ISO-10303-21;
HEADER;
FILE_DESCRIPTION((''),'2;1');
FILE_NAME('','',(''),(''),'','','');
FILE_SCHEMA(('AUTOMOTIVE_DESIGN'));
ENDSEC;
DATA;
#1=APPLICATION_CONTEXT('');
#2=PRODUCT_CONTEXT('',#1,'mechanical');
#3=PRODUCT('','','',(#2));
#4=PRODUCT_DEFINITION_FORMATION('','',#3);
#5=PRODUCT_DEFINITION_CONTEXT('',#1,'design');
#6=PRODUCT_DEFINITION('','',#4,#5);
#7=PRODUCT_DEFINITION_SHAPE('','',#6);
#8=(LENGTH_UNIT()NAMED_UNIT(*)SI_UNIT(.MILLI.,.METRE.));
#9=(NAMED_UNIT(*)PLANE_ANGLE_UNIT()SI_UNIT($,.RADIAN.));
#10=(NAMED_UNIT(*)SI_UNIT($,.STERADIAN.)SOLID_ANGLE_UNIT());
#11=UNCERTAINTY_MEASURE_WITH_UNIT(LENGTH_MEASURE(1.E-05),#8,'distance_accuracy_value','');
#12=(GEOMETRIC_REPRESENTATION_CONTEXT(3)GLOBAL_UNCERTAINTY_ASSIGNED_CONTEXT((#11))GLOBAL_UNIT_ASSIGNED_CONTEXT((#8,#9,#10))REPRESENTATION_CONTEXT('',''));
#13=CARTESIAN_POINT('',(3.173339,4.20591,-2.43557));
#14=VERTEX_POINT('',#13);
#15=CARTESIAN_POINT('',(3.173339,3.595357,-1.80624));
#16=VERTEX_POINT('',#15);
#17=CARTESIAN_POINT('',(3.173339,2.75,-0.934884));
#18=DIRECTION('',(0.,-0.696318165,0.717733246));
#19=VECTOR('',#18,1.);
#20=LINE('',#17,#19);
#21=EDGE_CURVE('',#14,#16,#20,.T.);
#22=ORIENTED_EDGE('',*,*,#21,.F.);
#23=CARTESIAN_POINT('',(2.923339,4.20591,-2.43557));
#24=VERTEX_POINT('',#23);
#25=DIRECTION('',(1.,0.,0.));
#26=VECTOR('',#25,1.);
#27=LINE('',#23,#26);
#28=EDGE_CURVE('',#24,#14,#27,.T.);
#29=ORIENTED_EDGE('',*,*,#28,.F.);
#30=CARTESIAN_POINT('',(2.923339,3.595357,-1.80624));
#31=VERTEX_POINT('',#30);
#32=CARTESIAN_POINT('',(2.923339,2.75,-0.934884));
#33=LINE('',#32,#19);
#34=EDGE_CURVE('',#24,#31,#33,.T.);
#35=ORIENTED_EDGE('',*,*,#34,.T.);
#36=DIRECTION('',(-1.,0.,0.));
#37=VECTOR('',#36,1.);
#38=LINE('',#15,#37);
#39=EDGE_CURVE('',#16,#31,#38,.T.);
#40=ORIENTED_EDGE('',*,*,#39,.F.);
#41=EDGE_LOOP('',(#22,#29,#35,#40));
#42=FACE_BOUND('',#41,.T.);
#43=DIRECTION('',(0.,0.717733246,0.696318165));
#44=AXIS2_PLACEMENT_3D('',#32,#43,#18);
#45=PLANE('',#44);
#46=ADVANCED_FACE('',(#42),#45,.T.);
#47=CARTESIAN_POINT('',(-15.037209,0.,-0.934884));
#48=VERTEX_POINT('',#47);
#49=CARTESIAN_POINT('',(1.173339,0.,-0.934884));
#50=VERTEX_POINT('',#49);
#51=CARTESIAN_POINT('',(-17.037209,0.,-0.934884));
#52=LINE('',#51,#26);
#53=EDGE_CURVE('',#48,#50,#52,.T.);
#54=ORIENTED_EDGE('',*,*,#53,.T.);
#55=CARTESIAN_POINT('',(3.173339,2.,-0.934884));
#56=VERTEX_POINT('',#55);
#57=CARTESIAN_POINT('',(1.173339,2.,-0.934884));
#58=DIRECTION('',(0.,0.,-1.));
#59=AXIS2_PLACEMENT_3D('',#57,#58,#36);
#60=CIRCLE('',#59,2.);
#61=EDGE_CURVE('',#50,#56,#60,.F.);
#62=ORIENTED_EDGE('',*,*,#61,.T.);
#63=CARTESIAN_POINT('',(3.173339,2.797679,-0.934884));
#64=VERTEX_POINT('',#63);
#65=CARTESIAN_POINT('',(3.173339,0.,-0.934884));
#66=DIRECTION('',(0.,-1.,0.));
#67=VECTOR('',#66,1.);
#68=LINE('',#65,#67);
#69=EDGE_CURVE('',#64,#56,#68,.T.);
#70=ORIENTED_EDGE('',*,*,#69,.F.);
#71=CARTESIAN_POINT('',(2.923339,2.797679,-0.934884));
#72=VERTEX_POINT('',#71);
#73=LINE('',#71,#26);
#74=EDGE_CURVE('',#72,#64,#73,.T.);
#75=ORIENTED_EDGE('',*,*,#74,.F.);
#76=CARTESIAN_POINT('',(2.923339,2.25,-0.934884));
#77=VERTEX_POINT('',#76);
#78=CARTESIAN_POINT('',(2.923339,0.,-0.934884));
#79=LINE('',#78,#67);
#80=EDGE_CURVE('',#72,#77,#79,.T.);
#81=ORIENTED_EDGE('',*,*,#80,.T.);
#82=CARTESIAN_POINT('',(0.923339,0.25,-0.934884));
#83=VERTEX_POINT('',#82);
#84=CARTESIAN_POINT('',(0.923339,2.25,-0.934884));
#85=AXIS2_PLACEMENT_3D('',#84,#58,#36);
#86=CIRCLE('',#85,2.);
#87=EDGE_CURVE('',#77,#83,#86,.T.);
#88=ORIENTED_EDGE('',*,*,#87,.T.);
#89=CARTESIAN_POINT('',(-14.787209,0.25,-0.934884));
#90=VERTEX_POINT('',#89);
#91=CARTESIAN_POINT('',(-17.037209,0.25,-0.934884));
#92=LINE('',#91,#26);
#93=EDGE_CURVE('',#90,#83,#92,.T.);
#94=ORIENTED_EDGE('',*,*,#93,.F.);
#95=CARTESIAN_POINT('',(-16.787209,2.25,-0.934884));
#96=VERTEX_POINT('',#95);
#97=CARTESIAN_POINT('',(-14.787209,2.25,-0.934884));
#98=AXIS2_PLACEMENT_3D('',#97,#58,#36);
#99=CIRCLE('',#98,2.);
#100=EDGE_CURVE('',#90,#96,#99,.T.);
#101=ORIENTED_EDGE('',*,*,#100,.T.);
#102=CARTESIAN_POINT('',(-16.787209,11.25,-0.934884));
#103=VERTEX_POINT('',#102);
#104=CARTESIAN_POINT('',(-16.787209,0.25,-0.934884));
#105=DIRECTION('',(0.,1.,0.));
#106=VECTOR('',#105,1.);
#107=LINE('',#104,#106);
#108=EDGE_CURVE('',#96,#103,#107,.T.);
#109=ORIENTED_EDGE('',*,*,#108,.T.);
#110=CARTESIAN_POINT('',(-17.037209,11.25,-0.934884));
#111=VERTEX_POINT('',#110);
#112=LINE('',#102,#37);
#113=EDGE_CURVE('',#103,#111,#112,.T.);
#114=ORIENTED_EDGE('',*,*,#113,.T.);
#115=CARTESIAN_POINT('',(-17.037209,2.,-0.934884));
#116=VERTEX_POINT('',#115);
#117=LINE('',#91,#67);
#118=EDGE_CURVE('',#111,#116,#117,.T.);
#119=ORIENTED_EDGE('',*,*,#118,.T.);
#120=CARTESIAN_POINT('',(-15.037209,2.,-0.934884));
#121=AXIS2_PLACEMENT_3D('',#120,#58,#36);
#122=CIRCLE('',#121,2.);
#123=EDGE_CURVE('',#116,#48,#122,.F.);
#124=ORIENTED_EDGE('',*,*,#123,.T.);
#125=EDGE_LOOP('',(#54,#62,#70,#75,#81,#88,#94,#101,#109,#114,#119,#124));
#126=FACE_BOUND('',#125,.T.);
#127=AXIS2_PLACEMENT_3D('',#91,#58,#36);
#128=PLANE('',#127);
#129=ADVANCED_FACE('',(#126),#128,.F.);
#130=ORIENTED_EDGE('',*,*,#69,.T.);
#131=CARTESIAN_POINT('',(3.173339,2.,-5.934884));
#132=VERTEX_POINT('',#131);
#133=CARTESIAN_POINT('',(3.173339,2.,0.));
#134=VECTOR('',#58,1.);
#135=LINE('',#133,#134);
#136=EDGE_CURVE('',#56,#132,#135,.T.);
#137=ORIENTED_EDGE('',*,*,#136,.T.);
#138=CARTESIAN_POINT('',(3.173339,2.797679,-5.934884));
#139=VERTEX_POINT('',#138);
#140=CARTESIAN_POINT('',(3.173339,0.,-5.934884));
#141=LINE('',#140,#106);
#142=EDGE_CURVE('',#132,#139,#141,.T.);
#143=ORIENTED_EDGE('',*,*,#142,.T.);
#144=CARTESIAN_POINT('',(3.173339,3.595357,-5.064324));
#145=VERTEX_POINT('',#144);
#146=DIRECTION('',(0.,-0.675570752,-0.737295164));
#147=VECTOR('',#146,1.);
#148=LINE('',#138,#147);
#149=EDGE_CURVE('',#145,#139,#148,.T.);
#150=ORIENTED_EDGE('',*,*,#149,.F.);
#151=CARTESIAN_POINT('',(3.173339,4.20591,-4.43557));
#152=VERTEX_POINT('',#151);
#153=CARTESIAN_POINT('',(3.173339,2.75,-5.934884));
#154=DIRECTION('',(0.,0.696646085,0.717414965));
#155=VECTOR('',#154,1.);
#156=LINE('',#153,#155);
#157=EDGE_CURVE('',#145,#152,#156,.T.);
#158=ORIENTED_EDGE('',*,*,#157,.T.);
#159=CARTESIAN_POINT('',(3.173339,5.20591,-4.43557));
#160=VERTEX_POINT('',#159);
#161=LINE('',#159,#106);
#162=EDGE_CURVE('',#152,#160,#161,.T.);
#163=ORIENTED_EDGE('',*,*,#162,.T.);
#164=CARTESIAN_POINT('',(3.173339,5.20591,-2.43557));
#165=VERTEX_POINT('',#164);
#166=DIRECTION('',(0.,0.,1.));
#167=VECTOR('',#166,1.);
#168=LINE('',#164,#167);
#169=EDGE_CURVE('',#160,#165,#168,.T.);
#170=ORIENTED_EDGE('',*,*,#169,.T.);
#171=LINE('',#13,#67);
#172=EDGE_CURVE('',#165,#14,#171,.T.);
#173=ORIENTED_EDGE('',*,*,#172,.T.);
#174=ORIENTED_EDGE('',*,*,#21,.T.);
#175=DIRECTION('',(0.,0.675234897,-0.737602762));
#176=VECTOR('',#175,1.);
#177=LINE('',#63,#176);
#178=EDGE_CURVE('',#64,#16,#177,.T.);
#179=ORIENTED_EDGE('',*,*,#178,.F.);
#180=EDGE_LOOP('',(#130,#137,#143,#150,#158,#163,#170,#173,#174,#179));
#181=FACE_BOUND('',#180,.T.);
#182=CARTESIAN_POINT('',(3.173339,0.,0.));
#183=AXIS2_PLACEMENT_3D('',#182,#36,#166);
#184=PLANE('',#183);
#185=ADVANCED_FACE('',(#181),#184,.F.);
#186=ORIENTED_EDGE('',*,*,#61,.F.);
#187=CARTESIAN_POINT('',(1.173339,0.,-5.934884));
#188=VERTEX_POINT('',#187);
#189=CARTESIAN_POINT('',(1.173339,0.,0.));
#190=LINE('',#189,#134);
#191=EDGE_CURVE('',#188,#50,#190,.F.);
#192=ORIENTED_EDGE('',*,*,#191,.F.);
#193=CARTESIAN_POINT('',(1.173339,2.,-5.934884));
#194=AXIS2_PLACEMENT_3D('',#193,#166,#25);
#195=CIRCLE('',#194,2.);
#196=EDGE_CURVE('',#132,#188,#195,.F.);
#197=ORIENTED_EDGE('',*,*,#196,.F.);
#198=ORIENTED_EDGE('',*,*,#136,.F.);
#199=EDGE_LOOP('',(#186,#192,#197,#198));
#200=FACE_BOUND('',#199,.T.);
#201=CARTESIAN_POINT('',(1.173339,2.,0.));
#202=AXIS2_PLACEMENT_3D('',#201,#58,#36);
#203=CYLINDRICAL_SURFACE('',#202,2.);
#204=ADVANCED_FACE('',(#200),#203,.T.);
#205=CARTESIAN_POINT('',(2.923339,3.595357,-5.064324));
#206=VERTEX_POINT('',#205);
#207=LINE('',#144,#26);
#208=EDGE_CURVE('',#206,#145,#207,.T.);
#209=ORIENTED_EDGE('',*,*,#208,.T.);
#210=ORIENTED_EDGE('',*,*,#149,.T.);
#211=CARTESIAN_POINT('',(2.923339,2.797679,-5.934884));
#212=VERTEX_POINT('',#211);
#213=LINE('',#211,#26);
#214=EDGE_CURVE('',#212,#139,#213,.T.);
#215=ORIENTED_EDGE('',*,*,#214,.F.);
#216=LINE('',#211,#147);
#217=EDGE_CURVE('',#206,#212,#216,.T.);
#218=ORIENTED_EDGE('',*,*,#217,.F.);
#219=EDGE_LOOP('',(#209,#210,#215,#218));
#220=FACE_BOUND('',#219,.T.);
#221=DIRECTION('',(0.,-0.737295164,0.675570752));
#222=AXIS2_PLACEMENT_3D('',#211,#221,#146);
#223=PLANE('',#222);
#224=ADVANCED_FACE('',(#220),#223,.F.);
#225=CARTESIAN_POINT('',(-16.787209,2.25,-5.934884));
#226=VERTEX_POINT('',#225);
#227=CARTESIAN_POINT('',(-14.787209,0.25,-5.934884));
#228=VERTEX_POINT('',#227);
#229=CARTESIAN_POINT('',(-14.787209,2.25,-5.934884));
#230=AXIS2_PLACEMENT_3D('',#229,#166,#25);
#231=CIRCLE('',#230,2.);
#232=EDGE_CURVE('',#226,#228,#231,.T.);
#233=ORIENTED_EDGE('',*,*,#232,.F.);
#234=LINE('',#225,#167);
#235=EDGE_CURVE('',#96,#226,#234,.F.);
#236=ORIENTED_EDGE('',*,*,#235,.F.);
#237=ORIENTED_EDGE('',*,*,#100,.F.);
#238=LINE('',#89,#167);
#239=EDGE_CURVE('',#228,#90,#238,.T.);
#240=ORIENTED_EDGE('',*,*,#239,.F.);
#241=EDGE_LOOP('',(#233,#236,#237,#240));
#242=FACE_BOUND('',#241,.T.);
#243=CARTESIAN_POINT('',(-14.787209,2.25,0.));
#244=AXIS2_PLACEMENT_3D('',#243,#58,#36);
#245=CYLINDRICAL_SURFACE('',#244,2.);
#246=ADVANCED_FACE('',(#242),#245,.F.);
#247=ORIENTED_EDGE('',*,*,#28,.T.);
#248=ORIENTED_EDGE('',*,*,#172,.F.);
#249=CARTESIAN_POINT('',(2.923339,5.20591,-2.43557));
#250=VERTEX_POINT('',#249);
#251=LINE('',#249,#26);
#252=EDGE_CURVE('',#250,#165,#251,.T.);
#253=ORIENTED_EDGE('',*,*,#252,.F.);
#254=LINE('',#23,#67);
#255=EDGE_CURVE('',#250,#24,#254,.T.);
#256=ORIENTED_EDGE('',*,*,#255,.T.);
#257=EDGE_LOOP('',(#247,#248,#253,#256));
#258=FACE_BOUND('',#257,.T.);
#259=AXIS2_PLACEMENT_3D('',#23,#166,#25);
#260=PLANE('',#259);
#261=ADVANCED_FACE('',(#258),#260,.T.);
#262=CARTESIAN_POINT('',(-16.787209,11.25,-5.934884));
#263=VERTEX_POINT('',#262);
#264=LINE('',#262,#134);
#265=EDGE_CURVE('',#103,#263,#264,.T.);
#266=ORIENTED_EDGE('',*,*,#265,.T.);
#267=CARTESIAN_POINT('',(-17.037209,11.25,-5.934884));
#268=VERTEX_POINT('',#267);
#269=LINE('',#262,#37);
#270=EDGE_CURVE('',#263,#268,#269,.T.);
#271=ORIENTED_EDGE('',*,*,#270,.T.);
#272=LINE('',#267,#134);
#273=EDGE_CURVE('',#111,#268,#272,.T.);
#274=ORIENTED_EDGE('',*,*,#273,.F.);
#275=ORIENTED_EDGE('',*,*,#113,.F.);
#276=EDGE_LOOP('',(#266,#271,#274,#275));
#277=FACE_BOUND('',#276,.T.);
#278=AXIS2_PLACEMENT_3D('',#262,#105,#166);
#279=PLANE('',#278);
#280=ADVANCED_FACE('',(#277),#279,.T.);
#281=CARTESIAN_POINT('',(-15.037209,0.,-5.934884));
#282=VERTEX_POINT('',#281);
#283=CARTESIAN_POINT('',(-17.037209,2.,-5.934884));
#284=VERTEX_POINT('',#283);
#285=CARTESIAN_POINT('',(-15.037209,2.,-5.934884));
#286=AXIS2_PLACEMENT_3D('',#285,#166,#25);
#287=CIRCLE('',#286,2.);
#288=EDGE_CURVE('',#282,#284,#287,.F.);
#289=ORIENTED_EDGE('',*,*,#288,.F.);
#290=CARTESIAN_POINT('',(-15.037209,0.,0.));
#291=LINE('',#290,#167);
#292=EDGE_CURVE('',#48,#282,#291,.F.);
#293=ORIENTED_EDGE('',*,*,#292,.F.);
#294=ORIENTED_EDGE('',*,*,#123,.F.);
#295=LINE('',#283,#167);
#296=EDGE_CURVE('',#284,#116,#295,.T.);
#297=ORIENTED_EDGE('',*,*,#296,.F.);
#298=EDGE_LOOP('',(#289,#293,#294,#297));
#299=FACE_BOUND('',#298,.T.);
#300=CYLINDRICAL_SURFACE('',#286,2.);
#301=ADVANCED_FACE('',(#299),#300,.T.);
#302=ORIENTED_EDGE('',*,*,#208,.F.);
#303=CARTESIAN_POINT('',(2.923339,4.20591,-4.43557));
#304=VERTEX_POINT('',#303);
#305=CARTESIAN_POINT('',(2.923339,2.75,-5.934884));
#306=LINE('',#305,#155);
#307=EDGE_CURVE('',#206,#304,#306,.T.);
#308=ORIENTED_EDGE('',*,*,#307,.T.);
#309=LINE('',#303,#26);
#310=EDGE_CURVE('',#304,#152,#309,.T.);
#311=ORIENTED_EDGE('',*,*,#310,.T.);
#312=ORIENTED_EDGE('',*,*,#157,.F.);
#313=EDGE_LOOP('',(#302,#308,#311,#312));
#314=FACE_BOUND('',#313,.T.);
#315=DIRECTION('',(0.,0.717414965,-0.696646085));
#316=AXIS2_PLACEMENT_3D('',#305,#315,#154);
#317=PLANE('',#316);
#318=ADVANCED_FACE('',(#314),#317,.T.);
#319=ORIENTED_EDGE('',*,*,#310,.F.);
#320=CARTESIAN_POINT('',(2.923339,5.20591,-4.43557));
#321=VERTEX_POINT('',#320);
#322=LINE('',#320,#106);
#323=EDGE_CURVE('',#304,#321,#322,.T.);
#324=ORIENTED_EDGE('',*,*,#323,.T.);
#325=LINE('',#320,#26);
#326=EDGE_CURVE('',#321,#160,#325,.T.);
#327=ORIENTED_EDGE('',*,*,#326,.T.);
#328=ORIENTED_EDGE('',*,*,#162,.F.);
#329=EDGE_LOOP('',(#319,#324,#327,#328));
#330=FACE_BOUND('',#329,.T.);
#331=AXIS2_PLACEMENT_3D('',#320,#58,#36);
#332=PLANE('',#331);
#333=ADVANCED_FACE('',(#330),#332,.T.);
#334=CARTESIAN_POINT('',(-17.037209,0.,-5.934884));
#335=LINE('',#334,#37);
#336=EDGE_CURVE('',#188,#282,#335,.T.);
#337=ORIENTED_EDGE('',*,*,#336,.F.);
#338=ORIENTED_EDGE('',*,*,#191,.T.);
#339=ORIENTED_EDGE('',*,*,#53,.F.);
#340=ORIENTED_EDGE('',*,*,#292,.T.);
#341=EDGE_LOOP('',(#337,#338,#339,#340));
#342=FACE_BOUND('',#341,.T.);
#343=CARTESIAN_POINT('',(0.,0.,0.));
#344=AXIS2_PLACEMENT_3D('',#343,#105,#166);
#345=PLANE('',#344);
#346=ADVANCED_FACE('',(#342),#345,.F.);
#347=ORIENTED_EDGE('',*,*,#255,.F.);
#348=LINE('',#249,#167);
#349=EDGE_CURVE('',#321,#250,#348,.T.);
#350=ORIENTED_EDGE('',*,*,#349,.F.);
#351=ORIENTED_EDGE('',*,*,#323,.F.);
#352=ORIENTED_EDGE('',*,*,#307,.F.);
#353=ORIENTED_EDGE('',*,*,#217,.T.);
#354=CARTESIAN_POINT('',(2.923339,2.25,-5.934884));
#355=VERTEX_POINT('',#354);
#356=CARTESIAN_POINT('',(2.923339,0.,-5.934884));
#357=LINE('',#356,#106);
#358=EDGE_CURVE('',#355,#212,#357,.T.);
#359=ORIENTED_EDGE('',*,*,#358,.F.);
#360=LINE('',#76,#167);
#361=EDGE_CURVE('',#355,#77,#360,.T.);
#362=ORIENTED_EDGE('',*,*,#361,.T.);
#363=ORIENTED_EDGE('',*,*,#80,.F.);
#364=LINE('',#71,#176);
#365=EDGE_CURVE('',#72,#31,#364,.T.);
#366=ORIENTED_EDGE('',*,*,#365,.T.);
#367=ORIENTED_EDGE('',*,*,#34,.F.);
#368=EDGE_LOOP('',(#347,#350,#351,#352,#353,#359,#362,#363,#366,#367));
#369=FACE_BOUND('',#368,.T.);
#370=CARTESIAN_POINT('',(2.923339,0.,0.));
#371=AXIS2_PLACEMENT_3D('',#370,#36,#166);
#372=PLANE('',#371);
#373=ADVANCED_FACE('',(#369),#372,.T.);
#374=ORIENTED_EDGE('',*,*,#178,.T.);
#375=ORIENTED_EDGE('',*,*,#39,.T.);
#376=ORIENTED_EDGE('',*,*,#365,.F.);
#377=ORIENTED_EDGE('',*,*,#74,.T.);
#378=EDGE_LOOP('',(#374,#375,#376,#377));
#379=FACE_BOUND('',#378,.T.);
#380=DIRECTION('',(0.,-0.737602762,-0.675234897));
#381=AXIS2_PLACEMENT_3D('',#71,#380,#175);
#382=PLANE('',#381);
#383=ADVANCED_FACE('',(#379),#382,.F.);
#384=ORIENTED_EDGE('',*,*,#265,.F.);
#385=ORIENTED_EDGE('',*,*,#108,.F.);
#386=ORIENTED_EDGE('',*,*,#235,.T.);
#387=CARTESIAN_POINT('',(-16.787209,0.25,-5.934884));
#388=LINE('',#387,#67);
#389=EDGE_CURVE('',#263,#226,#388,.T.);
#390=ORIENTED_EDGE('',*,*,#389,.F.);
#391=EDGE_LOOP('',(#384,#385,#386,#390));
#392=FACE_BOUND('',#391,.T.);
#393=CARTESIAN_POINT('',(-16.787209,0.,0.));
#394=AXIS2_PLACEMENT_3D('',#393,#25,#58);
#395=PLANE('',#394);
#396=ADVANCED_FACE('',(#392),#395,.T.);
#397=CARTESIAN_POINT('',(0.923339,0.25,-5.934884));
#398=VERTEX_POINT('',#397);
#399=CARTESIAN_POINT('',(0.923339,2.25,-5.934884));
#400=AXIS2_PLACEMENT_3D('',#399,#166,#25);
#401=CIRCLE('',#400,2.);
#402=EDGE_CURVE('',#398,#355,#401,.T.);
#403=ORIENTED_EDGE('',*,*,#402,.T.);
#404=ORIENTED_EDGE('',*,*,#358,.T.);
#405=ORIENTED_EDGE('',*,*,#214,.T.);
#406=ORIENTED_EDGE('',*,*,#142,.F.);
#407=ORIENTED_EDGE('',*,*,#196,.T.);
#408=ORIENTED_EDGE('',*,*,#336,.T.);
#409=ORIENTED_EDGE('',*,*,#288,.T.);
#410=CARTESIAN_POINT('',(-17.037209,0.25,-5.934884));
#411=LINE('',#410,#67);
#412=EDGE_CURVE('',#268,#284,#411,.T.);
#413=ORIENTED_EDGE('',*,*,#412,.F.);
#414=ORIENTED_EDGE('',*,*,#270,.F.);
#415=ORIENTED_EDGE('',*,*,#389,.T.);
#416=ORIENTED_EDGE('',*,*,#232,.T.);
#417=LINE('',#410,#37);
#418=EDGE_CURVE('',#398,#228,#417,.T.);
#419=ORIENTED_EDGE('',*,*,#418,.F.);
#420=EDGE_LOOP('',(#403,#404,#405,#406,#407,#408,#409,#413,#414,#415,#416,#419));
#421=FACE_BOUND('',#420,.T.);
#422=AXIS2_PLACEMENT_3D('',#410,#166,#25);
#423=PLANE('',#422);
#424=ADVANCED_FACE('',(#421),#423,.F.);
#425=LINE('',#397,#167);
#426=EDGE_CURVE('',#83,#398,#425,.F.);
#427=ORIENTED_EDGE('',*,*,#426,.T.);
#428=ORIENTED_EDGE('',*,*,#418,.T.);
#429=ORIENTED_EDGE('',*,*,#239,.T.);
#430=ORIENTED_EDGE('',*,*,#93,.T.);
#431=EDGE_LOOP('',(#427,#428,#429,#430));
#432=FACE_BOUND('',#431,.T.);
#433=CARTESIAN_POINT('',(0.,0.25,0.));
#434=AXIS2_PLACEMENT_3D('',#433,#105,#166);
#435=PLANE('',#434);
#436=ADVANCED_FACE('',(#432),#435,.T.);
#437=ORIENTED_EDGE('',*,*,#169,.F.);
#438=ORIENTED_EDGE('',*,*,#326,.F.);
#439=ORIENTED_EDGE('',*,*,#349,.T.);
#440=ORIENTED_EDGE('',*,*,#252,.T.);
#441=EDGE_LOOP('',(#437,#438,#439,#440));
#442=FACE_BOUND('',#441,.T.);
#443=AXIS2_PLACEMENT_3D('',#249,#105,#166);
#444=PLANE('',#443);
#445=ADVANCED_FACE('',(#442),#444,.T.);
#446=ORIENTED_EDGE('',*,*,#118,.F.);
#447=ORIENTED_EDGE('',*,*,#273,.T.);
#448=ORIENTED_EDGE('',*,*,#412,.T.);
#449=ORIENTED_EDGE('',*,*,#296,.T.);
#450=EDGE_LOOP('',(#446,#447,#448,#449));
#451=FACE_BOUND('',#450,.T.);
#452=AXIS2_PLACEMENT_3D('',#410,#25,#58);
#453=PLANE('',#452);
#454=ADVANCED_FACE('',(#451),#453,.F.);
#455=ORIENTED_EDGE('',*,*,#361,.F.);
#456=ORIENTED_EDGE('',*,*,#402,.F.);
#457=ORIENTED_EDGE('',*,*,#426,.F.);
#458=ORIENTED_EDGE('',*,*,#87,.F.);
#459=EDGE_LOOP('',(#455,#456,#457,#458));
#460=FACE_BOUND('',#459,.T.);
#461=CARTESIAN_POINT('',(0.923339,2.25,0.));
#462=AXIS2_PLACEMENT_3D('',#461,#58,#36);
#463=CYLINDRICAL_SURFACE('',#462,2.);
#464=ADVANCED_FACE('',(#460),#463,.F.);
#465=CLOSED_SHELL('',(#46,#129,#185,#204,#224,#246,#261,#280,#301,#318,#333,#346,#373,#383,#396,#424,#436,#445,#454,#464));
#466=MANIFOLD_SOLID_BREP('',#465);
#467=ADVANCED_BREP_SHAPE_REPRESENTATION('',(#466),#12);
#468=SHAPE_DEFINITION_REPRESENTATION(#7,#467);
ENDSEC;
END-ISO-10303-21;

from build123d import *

# Parameters (mm, degrees)
SKETCH1_W           = 28.6
SKETCH1_H           = 5
BOSS_EXTRUDE1_DEPTH = 0.25
SKETCH2_W           = 5
SKETCH2_H           = 11
BOSS_EXTRUDE2_DEPTH = 0.25
BOSS_EXTRUDE3_DEPTH = 0.25
FILLET3_R           = 2
FILLET4_R           = 2
SKETCH4_W           = 6.639451807
SKETCH4_H           = 5
CUT_EXTRUDE1_DEPTH  = 1.5
SKETCH5_W           = 5
SKETCH5_H           = 3.595357205
BOSS_EXTRUDE4_DEPTH = 0.25
FILLET5_R           = 2
FILLET6_R           = 2
BOSS_EXTRUDE5_DEPTH = 0.25
CUT_EXTRUDE2_DEPTH  = 0.25
SKETCH8_W           = 6.875858175
SKETCH8_H           = 9.336027613
CUT_EXTRUDE3_DEPTH  = 5.25


with BuildPart() as part:
    # Sketch1 → Boss-Extrude1 (new body)
    with BuildSketch(Plane(origin=(0, 0, 0), x_dir=(1, 0, 0), z_dir=(0, 1, 0))):
        with Locations((-2.737209302, 3.434883721)):
            Rectangle(SKETCH1_W, SKETCH1_H)
    extrude(amount=BOSS_EXTRUDE1_DEPTH)

    # Sketch2 → Boss-Extrude2 (add)
    with BuildSketch(Plane.ZY.offset(17.037209302)):
        with Locations((-3.434883721, 5.75)):
            Rectangle(SKETCH2_W, SKETCH2_H)
    extrude(amount=-BOSS_EXTRUDE2_DEPTH)

    # Sketch3 → Boss-Extrude3 (add)
    with BuildSketch(Plane(origin=(11.562790698, 0, 0), x_dir=(0, 0, -1), z_dir=(1, 0, 0))):
        Polygon((0.934883721, 0.25), (5.936255285, 0.25), (5.936255285, 2.75), (4.435569503, 4.205909665), (4.435569503, 5.205909665), (3.435569503, 5.205909665), (2.435569503, 5.205909665), (2.435569503, 4.205909665), (0.934883721, 2.75), align=None)
    extrude(amount=-BOSS_EXTRUDE3_DEPTH)

    # Fillet3
    fillet3_edges = [part.edges().sort_by_distance(p)[0] for p in [
        (-16.787209302, 0.25, -3.434883721),
        (11.312790698, 0.25, -3.434883721),
    ]]
    fillet(fillet3_edges, radius=FILLET3_R)

    # Fillet4
    # the kernel refuses this fillet: 2 mm, written as the material it takes off along each edge
    with BuildSketch(Plane(origin=(11.562790698, 0, -10.934883721), x_dir=(-1, 0, 0), z_dir=(0, 0, 1))) as fillet4_piece_1:
        with BuildLine():
            CenterArc((FILLET4_R, -FILLET4_R), FILLET4_R, 90, 90)
            Line((0, -FILLET4_R), (0, 0))
            Line((0, 0), (FILLET4_R, 0))
        make_face()
    extrude(amount=15, mode=Mode.SUBTRACT)
    with BuildSketch(Plane(origin=(-17.037209302, 0, 4.065116279), x_dir=(0, 1, 0), z_dir=(0, 0, -1))) as fillet4_piece_2:
        with BuildLine():
            CenterArc((FILLET4_R, FILLET4_R), FILLET4_R, 180, 90)
            Line((0, FILLET4_R), (0, 0))
            Line((0, 0), (FILLET4_R, 0))
        make_face()
    extrude(amount=15, mode=Mode.SUBTRACT)

    # Sketch4 → Cut-Extrude1 (cut)
    with BuildSketch(Plane.XZ):
        with Locations((6.243064795, -3.434883721)):
            Rectangle(SKETCH4_W, SKETCH4_H)
    extrude(amount=-CUT_EXTRUDE1_DEPTH, mode=Mode.SUBTRACT)


with BuildPart() as cut_extrude1_piece_1:
    # of the separate pieces the step leaves, piece 1, a body of its own (cut_extrude1_pieces)
    add(part.part.solids().sort_by_distance((-16.787209302, 2.25, -5.934883721))[0])

    # Sketch5 → Boss-Extrude4 (add)
    with BuildSketch(Plane(origin=(2.923338891, 0, 0), x_dir=(0, 0, -1), z_dir=(1, 0, 0))):
        with Locations((3.434883721, 1.797678603)):
            Rectangle(SKETCH5_W, SKETCH5_H)
    extrude(amount=BOSS_EXTRUDE4_DEPTH)

    # Fillet5
    fillet5_edges = [cut_extrude1_piece_1.edges().sort_by_distance(p)[0] for p in [
        (2.923338891, 0.25, -3.434883721),
    ]]
    fillet(fillet5_edges, radius=FILLET5_R)

    # Fillet6
    fillet6_edges = [cut_extrude1_piece_1.edges().sort_by_distance(p)[0] for p in [
        (3.173338891, 0, -3.434883721),
    ]]
    fillet(fillet6_edges, radius=FILLET6_R)

    # Sketch6 → Boss-Extrude5 (add)
    with BuildSketch(Plane(origin=(3.173338891, 0, 0), x_dir=(0, 0, -1), z_dir=(1, 0, 0))):
        Polygon((0.934883721, 2.75), (2.435569503, 4.205909665), (2.435569503, 5.205909665), (4.435569503, 5.205909665), (4.435569503, 4.205909665), (5.934883721, 2.75), align=None)
    extrude(amount=-BOSS_EXTRUDE5_DEPTH)

    # Sketch7 → Cut-Extrude2 (cut)
    with BuildSketch(Plane(origin=(3.173338891, 0, 0), x_dir=(0, 0, -1), z_dir=(1, 0, 0))):
        Polygon((1.806239664, 3.595357205), (0.934883721, 3.595357205), (0.934883721, 2.797678603), align=None)
        Polygon((5.064324161, 3.595357205), (5.934883721, 3.595357205), (5.934883721, 2.797678603), align=None)
    extrude(amount=-CUT_EXTRUDE2_DEPTH, mode=Mode.SUBTRACT)


with BuildPart() as cut_extrude1_piece_2:
    # of the separate pieces the step leaves, piece 2, a body of its own (cut_extrude1_pieces)
    add(part.part.solids().sort_by_distance((9.562790698, 0, -5.934883721))[0])

    # Sketch8 → Cut-Extrude3 (cut)
    with BuildSketch(Plane(origin=(0, 0, -5.936255285), x_dir=(-1, 0, 0), z_dir=(0, 0, -1))):
        with Locations((-11.197633492, 2.582921844)):
            Rectangle(SKETCH8_W, SKETCH8_H)
    extrude(amount=-CUT_EXTRUDE3_DEPTH, mode=Mode.SUBTRACT)


solid = cut_extrude1_piece_1.part
